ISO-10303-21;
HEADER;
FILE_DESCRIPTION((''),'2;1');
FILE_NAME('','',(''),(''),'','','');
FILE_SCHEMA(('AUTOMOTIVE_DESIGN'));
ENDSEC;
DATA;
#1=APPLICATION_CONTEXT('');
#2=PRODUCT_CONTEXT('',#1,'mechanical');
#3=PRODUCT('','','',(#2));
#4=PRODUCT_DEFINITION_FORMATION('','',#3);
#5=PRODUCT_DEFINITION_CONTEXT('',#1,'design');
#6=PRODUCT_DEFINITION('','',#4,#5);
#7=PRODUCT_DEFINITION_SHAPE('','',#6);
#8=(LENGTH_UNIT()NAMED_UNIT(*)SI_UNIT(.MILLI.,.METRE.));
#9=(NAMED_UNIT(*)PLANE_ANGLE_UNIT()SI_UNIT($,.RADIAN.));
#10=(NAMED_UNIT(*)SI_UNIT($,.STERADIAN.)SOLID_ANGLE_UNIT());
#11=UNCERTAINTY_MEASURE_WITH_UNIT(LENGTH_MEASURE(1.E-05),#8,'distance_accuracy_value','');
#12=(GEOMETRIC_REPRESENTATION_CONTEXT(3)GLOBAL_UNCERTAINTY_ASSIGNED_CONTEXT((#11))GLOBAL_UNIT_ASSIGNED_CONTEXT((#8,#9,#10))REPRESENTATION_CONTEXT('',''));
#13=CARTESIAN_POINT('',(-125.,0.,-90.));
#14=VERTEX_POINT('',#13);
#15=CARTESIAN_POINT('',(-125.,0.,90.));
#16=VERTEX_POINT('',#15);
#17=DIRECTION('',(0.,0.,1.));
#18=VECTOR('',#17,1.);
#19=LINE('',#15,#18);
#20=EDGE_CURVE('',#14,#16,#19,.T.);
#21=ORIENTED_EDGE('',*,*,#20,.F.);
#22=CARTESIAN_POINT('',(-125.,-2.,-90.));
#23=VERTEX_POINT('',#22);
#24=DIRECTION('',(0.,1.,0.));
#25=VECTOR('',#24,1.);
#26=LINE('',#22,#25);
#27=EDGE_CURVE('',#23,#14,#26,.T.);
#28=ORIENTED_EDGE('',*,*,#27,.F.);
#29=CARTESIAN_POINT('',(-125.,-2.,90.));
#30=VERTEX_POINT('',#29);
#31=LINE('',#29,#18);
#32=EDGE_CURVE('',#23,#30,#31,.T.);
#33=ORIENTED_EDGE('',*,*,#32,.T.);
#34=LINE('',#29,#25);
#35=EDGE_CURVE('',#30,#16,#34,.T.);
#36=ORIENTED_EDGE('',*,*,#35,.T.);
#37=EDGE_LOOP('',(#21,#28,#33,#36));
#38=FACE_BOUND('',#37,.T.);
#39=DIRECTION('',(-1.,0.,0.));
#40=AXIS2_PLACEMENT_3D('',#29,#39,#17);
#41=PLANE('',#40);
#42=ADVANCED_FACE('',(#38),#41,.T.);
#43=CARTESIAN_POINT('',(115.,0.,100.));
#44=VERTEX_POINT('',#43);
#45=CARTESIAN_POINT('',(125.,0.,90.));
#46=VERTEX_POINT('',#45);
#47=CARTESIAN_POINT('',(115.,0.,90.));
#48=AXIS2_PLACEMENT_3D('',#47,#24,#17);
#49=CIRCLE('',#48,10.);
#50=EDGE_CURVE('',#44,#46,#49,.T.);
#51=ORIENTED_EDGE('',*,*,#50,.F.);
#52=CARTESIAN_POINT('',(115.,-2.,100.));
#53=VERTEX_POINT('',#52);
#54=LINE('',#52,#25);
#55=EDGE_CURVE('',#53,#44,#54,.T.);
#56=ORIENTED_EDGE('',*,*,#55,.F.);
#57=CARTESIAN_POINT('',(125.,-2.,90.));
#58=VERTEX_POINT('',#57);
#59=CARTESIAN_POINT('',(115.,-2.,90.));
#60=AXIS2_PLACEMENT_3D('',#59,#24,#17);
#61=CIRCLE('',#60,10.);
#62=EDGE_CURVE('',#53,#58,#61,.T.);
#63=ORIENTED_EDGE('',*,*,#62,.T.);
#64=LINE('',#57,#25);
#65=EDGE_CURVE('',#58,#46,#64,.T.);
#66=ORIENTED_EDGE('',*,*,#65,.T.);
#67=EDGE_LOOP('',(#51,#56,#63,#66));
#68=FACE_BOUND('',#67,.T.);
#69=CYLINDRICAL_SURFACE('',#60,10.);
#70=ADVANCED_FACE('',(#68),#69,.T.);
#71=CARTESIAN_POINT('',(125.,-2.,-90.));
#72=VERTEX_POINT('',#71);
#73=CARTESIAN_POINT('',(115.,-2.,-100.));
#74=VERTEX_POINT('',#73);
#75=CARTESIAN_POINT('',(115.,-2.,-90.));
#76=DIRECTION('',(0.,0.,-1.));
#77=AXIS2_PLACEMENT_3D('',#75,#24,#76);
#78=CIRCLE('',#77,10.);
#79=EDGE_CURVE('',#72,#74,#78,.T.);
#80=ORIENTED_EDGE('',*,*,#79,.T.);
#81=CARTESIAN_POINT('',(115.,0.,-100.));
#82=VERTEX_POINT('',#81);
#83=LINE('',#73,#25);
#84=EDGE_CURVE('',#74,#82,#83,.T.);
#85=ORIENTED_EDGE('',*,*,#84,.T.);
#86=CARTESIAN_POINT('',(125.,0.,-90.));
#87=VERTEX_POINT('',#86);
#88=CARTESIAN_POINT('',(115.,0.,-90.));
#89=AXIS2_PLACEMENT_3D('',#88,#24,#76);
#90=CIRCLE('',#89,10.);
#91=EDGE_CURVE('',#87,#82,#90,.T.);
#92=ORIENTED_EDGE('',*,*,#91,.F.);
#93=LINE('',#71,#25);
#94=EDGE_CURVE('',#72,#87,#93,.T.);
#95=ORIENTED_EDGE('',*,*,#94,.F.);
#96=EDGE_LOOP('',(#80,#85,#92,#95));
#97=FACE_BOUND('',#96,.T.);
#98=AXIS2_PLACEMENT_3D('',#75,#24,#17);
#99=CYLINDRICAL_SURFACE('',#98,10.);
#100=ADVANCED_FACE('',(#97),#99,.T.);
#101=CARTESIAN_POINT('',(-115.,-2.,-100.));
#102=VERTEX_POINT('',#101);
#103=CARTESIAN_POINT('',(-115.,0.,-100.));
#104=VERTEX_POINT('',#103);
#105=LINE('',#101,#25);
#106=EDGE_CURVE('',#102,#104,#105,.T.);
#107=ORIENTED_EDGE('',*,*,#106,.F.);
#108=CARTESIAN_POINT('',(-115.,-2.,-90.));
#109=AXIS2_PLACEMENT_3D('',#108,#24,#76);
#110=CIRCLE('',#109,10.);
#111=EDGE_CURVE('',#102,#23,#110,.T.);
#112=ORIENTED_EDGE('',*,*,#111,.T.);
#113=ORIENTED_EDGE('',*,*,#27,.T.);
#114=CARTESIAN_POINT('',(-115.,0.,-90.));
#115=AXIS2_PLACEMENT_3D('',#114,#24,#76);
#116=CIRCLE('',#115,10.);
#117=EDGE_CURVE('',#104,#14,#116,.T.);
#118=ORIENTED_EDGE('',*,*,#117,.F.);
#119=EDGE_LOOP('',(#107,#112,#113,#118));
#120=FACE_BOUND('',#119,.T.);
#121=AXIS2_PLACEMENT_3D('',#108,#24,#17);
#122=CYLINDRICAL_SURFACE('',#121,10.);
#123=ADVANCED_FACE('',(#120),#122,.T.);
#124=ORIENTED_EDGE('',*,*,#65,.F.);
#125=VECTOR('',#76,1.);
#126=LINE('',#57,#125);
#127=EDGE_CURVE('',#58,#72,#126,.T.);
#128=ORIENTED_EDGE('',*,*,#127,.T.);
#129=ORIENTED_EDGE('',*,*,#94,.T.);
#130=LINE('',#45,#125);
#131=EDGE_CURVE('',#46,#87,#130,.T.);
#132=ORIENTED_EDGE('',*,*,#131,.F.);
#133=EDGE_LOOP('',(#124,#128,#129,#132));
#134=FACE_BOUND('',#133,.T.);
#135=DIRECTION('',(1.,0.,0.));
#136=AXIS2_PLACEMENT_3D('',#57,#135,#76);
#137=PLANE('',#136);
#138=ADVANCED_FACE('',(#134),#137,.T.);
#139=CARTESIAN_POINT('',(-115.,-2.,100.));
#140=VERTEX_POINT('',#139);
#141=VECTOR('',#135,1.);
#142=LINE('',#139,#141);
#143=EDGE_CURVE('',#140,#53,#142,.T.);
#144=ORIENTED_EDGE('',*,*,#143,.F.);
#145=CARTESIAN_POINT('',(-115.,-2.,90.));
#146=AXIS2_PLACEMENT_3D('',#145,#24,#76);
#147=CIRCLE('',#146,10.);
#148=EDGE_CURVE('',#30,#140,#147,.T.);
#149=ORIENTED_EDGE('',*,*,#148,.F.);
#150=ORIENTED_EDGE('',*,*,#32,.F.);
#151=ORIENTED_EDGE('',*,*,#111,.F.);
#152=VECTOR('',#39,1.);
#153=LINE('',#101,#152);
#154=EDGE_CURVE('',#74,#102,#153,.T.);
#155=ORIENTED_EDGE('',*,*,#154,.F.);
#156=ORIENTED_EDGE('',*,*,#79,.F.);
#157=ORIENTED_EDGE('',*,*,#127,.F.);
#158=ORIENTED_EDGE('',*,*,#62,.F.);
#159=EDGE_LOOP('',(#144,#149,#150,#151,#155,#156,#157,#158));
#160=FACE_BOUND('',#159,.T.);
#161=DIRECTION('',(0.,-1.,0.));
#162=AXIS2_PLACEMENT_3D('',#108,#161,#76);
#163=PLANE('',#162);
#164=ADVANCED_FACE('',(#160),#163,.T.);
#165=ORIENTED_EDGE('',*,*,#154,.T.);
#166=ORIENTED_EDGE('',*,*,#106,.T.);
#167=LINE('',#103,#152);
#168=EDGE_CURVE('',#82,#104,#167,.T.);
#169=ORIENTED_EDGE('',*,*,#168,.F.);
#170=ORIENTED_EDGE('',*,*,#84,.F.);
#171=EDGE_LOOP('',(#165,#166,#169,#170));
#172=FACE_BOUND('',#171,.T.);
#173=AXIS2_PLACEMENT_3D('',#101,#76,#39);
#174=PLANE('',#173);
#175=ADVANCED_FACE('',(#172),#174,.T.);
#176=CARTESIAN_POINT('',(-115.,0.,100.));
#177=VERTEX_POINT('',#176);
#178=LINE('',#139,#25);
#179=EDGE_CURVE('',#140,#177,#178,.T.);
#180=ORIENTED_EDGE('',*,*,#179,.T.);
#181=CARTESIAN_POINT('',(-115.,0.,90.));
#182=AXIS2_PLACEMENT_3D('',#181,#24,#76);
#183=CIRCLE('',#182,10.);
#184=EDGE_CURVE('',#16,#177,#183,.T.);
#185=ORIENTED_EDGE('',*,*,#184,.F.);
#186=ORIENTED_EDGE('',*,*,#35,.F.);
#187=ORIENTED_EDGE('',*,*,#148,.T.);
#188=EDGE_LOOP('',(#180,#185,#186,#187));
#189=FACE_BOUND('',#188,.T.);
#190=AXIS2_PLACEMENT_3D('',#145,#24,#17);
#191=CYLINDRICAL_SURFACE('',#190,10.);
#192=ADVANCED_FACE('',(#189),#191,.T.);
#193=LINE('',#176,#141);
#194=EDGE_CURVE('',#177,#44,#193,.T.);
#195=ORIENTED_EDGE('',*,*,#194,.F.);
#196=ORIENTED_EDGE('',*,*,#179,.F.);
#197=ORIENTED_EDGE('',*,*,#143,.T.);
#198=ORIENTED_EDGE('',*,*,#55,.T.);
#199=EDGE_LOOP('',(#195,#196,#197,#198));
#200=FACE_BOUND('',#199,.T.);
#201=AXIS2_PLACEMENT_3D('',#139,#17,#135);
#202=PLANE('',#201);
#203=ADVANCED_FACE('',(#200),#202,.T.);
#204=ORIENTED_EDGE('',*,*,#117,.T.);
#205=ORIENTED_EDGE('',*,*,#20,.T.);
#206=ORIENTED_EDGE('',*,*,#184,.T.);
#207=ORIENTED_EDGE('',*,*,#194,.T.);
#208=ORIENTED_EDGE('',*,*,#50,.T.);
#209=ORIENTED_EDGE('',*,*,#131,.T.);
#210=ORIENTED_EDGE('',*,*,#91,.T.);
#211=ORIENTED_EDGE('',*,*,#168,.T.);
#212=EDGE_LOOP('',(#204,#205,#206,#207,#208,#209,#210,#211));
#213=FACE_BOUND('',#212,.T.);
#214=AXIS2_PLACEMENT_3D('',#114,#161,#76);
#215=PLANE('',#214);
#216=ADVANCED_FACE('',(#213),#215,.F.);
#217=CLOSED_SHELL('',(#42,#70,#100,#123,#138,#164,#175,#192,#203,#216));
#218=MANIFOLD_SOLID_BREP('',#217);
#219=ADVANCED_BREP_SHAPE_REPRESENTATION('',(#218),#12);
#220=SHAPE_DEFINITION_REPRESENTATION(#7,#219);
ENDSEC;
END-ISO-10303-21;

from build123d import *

# Parameters (mm, degrees)
FLANGE_BASE1_DEPTH = 2


# Sheet-metal steps are written as plain solids
with BuildPart() as part:
    # Esboço1 → Flange-base1 (new body)
    with BuildSketch(Plane(origin=(0, 0, 0), x_dir=(1, 0, 0), z_dir=(0, 1, 0))):
        with BuildLine():
            Line((-115, -100), (115, -100))
            ThreePointArc((115, -100), (122.071067812, -97.071067812), (125, -90))
            Line((125, -90), (125, 90))
            ThreePointArc((125, 90), (122.071067812, 97.071067812), (115, 100))
            Line((115, 100), (-115, 100))
            ThreePointArc((-115, 100), (-122.071067812, 97.071067812), (-125, 90))
            Line((-125, 90), (-125, -90))
            ThreePointArc((-125, -90), (-122.071067812, -97.071067812), (-115, -100))
        make_face()
    extrude(amount=-FLANGE_BASE1_DEPTH)


solid = part.part
